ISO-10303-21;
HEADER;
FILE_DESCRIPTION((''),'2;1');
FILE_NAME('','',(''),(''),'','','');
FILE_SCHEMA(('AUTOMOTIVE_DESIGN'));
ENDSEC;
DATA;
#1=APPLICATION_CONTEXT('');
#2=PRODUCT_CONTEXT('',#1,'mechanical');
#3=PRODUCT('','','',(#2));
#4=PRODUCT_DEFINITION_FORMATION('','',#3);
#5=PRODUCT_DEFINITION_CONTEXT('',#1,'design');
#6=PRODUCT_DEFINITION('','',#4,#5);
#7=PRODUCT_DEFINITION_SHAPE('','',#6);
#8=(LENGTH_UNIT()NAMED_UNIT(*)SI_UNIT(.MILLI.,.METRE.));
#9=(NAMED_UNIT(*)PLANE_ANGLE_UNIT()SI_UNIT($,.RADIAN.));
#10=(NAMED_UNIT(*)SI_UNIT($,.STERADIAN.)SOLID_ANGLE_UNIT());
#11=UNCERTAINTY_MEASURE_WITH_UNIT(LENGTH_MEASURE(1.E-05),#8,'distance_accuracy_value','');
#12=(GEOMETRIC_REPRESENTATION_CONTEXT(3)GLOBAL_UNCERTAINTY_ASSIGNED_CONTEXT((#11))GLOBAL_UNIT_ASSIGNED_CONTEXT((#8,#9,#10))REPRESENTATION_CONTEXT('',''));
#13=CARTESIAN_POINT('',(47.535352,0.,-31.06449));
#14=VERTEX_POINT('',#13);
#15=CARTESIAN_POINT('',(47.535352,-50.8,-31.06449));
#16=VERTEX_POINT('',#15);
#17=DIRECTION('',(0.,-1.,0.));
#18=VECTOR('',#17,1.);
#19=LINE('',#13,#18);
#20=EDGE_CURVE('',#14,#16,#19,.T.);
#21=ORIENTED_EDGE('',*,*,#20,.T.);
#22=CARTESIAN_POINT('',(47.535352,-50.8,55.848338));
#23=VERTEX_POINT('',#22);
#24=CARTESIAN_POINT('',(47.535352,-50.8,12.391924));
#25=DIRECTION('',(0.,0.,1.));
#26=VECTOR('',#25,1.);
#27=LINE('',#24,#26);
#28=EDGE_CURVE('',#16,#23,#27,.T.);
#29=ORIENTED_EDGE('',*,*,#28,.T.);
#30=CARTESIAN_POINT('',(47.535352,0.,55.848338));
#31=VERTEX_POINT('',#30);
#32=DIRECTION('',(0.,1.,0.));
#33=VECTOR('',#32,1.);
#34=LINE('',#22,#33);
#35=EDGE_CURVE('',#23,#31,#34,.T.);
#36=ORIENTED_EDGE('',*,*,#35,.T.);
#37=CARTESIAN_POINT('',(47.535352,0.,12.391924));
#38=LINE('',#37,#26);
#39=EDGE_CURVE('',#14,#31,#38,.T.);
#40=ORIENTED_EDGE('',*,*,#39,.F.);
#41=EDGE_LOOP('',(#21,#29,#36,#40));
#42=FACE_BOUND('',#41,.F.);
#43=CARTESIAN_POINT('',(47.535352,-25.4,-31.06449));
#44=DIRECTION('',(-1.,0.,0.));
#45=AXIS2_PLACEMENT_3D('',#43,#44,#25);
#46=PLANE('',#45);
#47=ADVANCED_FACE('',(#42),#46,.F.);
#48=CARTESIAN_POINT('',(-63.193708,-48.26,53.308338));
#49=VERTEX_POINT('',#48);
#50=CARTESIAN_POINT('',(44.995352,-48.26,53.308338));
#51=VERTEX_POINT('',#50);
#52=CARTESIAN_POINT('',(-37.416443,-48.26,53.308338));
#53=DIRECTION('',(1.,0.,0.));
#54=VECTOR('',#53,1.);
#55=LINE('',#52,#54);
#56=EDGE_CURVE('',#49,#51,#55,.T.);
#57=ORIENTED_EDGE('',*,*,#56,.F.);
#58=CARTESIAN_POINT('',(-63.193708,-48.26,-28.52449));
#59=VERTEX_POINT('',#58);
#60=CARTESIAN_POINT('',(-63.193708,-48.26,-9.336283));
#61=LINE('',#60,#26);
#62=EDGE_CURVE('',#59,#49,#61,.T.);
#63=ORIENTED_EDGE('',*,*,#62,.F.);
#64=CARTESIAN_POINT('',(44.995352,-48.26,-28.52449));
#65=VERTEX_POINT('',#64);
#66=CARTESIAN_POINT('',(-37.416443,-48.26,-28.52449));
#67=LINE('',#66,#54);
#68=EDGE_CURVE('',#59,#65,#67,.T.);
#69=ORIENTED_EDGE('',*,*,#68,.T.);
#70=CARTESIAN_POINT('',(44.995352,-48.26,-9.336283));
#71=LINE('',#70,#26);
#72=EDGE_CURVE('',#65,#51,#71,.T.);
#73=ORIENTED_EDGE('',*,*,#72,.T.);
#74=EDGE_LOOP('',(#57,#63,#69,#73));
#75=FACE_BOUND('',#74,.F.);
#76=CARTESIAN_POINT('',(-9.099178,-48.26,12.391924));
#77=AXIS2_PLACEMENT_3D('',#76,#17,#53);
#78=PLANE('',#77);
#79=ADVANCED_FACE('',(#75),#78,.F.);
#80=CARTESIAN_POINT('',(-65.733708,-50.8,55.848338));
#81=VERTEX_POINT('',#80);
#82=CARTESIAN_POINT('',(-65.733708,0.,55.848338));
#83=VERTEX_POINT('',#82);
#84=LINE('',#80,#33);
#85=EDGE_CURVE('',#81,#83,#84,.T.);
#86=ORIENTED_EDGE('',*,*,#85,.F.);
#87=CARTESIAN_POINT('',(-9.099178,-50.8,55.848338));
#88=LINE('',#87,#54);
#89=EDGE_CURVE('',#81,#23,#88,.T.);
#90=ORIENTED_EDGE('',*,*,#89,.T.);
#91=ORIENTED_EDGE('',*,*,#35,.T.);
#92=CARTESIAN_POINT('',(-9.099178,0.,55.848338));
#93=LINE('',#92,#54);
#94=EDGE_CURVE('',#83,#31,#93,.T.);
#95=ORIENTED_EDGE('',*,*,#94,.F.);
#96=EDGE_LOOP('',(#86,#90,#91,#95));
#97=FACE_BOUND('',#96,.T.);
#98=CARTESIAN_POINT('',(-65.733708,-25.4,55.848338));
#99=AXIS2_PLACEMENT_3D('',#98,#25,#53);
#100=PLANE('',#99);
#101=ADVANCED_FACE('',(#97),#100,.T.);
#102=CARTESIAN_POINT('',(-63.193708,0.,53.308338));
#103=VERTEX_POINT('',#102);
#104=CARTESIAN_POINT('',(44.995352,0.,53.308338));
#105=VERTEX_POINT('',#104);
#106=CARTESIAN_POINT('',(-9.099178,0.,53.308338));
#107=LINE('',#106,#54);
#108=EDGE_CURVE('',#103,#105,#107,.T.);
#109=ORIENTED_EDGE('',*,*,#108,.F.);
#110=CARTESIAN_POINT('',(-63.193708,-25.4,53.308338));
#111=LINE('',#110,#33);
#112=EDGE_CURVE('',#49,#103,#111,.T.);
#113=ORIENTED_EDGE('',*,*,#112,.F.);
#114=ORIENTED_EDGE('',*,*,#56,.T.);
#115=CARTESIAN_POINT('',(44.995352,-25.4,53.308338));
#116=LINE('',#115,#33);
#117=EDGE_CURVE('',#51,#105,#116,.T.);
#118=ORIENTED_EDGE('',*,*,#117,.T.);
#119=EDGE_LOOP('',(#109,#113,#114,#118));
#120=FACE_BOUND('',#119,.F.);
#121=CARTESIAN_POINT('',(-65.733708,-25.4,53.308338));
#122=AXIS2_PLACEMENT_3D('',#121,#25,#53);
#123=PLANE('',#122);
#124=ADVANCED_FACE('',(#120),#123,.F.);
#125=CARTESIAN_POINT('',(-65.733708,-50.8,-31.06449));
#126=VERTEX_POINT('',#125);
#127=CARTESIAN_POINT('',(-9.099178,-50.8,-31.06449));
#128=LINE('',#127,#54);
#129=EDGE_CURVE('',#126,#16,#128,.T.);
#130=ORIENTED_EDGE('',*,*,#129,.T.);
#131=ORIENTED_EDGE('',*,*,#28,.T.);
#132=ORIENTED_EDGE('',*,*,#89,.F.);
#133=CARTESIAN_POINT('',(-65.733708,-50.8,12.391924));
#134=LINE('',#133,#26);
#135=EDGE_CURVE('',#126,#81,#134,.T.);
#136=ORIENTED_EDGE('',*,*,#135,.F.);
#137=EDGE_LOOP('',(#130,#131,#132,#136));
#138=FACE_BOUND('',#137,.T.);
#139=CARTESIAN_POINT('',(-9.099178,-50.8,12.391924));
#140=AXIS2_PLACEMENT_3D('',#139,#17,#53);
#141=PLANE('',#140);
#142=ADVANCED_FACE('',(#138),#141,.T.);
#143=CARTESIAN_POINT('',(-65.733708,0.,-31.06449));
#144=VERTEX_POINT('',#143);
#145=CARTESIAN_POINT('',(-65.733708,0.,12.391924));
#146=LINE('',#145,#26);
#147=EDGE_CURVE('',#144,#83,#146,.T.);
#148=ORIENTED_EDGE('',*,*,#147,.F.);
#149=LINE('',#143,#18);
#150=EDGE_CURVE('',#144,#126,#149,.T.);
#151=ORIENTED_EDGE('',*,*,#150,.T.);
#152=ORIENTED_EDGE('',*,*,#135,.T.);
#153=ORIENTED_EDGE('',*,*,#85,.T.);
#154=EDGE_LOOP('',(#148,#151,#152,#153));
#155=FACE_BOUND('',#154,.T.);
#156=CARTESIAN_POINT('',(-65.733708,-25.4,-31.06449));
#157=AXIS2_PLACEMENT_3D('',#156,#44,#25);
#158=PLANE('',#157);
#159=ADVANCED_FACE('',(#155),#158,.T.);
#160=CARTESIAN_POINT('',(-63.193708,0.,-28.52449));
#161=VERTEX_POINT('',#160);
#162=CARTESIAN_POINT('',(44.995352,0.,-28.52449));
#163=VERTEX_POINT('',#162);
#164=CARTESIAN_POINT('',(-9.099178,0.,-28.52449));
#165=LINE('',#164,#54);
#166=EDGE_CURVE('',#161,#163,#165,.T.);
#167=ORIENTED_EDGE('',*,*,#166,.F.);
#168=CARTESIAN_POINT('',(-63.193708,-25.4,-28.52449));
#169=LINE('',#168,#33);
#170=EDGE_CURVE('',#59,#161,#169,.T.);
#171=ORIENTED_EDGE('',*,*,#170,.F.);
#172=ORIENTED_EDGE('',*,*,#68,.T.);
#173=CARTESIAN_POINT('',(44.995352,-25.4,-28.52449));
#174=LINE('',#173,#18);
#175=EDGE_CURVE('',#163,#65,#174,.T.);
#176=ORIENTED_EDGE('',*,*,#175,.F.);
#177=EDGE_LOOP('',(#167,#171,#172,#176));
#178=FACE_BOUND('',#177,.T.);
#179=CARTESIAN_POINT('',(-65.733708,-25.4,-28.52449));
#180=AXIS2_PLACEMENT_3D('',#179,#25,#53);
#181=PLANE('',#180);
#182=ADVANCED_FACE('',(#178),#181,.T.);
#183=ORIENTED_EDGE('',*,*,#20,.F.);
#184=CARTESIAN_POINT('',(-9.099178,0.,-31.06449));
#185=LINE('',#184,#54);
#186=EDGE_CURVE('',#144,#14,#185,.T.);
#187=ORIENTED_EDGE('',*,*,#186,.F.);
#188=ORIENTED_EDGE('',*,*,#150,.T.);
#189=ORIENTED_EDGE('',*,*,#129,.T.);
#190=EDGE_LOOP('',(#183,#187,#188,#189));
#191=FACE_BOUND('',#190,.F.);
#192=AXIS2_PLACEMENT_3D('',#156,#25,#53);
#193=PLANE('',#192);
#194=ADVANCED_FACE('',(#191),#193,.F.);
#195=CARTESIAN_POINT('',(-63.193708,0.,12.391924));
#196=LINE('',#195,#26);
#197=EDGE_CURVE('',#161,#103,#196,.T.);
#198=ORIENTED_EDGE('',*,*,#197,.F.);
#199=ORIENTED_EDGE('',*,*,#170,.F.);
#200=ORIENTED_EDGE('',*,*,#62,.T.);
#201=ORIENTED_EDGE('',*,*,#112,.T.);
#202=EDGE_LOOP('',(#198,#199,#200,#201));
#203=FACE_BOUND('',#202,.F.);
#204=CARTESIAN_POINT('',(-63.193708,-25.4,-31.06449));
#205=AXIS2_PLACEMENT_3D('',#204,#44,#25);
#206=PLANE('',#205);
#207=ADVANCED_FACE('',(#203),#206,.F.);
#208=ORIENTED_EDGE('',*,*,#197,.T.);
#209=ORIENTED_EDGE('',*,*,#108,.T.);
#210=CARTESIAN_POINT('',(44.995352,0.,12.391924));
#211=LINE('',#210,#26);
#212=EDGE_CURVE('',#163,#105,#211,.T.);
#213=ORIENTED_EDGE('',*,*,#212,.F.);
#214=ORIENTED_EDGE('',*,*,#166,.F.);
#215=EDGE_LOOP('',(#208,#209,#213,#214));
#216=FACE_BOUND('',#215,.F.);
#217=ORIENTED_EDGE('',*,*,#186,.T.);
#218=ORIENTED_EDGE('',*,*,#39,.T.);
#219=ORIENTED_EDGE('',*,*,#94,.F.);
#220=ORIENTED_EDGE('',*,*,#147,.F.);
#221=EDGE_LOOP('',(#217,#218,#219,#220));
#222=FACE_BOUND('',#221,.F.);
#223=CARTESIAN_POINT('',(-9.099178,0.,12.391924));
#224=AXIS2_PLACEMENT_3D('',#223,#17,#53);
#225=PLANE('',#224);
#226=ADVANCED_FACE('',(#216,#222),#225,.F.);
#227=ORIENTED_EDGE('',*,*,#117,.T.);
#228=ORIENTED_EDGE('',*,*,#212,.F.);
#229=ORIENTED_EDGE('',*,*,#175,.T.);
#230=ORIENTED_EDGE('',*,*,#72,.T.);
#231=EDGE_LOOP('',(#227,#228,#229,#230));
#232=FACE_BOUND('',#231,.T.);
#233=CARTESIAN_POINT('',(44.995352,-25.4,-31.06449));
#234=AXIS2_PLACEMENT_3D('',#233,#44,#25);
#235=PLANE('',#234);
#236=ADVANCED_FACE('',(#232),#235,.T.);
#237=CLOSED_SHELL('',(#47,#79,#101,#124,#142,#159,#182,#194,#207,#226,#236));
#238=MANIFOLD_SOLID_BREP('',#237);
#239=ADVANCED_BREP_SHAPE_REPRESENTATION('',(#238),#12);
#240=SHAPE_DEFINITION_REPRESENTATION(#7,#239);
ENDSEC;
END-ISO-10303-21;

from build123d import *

# Parameters (mm, degrees)
F0_W     = 113.2690608501
F0_H     = 86.9128275663
F2_DEPTH = 25.4
F3_DEPTH = 25.4
F4_T     = -2.54


# Not quite as in the source:
# - a feature names something its author has since deleted; it is built from what else it names
# - the program builds the solid bodies; features that only make, move or delete a surface that nothing else refers to are left out


with BuildPart() as f2:
    # F0 (on Front) → F2 (new body)
    with BuildSketch(Plane.XZ):
        with Locations((-9.0991780162, 12.3919239268)):
            Rectangle(F0_W, F0_H)
    extrude(amount=F2_DEPTH)

    # F3 (add): a face of the model
    f3_faces = [f2.faces().sort_by_distance(p)[0] for p in [
        (-9.0991780162, -25.4, 12.3919239268),
    ]]
    extrude(f3_faces, amount=F3_DEPTH)

    # F4
    f4_openings = [f2.faces().sort_by_distance(p)[0] for p in [
        (-9.099178, 0, 12.391924),
    ]]
    offset(amount=F4_T, openings=f4_openings)


with BuildPart() as f2_1:
    # F10: moved
    add(f2.part)


solid = f2_1.part
